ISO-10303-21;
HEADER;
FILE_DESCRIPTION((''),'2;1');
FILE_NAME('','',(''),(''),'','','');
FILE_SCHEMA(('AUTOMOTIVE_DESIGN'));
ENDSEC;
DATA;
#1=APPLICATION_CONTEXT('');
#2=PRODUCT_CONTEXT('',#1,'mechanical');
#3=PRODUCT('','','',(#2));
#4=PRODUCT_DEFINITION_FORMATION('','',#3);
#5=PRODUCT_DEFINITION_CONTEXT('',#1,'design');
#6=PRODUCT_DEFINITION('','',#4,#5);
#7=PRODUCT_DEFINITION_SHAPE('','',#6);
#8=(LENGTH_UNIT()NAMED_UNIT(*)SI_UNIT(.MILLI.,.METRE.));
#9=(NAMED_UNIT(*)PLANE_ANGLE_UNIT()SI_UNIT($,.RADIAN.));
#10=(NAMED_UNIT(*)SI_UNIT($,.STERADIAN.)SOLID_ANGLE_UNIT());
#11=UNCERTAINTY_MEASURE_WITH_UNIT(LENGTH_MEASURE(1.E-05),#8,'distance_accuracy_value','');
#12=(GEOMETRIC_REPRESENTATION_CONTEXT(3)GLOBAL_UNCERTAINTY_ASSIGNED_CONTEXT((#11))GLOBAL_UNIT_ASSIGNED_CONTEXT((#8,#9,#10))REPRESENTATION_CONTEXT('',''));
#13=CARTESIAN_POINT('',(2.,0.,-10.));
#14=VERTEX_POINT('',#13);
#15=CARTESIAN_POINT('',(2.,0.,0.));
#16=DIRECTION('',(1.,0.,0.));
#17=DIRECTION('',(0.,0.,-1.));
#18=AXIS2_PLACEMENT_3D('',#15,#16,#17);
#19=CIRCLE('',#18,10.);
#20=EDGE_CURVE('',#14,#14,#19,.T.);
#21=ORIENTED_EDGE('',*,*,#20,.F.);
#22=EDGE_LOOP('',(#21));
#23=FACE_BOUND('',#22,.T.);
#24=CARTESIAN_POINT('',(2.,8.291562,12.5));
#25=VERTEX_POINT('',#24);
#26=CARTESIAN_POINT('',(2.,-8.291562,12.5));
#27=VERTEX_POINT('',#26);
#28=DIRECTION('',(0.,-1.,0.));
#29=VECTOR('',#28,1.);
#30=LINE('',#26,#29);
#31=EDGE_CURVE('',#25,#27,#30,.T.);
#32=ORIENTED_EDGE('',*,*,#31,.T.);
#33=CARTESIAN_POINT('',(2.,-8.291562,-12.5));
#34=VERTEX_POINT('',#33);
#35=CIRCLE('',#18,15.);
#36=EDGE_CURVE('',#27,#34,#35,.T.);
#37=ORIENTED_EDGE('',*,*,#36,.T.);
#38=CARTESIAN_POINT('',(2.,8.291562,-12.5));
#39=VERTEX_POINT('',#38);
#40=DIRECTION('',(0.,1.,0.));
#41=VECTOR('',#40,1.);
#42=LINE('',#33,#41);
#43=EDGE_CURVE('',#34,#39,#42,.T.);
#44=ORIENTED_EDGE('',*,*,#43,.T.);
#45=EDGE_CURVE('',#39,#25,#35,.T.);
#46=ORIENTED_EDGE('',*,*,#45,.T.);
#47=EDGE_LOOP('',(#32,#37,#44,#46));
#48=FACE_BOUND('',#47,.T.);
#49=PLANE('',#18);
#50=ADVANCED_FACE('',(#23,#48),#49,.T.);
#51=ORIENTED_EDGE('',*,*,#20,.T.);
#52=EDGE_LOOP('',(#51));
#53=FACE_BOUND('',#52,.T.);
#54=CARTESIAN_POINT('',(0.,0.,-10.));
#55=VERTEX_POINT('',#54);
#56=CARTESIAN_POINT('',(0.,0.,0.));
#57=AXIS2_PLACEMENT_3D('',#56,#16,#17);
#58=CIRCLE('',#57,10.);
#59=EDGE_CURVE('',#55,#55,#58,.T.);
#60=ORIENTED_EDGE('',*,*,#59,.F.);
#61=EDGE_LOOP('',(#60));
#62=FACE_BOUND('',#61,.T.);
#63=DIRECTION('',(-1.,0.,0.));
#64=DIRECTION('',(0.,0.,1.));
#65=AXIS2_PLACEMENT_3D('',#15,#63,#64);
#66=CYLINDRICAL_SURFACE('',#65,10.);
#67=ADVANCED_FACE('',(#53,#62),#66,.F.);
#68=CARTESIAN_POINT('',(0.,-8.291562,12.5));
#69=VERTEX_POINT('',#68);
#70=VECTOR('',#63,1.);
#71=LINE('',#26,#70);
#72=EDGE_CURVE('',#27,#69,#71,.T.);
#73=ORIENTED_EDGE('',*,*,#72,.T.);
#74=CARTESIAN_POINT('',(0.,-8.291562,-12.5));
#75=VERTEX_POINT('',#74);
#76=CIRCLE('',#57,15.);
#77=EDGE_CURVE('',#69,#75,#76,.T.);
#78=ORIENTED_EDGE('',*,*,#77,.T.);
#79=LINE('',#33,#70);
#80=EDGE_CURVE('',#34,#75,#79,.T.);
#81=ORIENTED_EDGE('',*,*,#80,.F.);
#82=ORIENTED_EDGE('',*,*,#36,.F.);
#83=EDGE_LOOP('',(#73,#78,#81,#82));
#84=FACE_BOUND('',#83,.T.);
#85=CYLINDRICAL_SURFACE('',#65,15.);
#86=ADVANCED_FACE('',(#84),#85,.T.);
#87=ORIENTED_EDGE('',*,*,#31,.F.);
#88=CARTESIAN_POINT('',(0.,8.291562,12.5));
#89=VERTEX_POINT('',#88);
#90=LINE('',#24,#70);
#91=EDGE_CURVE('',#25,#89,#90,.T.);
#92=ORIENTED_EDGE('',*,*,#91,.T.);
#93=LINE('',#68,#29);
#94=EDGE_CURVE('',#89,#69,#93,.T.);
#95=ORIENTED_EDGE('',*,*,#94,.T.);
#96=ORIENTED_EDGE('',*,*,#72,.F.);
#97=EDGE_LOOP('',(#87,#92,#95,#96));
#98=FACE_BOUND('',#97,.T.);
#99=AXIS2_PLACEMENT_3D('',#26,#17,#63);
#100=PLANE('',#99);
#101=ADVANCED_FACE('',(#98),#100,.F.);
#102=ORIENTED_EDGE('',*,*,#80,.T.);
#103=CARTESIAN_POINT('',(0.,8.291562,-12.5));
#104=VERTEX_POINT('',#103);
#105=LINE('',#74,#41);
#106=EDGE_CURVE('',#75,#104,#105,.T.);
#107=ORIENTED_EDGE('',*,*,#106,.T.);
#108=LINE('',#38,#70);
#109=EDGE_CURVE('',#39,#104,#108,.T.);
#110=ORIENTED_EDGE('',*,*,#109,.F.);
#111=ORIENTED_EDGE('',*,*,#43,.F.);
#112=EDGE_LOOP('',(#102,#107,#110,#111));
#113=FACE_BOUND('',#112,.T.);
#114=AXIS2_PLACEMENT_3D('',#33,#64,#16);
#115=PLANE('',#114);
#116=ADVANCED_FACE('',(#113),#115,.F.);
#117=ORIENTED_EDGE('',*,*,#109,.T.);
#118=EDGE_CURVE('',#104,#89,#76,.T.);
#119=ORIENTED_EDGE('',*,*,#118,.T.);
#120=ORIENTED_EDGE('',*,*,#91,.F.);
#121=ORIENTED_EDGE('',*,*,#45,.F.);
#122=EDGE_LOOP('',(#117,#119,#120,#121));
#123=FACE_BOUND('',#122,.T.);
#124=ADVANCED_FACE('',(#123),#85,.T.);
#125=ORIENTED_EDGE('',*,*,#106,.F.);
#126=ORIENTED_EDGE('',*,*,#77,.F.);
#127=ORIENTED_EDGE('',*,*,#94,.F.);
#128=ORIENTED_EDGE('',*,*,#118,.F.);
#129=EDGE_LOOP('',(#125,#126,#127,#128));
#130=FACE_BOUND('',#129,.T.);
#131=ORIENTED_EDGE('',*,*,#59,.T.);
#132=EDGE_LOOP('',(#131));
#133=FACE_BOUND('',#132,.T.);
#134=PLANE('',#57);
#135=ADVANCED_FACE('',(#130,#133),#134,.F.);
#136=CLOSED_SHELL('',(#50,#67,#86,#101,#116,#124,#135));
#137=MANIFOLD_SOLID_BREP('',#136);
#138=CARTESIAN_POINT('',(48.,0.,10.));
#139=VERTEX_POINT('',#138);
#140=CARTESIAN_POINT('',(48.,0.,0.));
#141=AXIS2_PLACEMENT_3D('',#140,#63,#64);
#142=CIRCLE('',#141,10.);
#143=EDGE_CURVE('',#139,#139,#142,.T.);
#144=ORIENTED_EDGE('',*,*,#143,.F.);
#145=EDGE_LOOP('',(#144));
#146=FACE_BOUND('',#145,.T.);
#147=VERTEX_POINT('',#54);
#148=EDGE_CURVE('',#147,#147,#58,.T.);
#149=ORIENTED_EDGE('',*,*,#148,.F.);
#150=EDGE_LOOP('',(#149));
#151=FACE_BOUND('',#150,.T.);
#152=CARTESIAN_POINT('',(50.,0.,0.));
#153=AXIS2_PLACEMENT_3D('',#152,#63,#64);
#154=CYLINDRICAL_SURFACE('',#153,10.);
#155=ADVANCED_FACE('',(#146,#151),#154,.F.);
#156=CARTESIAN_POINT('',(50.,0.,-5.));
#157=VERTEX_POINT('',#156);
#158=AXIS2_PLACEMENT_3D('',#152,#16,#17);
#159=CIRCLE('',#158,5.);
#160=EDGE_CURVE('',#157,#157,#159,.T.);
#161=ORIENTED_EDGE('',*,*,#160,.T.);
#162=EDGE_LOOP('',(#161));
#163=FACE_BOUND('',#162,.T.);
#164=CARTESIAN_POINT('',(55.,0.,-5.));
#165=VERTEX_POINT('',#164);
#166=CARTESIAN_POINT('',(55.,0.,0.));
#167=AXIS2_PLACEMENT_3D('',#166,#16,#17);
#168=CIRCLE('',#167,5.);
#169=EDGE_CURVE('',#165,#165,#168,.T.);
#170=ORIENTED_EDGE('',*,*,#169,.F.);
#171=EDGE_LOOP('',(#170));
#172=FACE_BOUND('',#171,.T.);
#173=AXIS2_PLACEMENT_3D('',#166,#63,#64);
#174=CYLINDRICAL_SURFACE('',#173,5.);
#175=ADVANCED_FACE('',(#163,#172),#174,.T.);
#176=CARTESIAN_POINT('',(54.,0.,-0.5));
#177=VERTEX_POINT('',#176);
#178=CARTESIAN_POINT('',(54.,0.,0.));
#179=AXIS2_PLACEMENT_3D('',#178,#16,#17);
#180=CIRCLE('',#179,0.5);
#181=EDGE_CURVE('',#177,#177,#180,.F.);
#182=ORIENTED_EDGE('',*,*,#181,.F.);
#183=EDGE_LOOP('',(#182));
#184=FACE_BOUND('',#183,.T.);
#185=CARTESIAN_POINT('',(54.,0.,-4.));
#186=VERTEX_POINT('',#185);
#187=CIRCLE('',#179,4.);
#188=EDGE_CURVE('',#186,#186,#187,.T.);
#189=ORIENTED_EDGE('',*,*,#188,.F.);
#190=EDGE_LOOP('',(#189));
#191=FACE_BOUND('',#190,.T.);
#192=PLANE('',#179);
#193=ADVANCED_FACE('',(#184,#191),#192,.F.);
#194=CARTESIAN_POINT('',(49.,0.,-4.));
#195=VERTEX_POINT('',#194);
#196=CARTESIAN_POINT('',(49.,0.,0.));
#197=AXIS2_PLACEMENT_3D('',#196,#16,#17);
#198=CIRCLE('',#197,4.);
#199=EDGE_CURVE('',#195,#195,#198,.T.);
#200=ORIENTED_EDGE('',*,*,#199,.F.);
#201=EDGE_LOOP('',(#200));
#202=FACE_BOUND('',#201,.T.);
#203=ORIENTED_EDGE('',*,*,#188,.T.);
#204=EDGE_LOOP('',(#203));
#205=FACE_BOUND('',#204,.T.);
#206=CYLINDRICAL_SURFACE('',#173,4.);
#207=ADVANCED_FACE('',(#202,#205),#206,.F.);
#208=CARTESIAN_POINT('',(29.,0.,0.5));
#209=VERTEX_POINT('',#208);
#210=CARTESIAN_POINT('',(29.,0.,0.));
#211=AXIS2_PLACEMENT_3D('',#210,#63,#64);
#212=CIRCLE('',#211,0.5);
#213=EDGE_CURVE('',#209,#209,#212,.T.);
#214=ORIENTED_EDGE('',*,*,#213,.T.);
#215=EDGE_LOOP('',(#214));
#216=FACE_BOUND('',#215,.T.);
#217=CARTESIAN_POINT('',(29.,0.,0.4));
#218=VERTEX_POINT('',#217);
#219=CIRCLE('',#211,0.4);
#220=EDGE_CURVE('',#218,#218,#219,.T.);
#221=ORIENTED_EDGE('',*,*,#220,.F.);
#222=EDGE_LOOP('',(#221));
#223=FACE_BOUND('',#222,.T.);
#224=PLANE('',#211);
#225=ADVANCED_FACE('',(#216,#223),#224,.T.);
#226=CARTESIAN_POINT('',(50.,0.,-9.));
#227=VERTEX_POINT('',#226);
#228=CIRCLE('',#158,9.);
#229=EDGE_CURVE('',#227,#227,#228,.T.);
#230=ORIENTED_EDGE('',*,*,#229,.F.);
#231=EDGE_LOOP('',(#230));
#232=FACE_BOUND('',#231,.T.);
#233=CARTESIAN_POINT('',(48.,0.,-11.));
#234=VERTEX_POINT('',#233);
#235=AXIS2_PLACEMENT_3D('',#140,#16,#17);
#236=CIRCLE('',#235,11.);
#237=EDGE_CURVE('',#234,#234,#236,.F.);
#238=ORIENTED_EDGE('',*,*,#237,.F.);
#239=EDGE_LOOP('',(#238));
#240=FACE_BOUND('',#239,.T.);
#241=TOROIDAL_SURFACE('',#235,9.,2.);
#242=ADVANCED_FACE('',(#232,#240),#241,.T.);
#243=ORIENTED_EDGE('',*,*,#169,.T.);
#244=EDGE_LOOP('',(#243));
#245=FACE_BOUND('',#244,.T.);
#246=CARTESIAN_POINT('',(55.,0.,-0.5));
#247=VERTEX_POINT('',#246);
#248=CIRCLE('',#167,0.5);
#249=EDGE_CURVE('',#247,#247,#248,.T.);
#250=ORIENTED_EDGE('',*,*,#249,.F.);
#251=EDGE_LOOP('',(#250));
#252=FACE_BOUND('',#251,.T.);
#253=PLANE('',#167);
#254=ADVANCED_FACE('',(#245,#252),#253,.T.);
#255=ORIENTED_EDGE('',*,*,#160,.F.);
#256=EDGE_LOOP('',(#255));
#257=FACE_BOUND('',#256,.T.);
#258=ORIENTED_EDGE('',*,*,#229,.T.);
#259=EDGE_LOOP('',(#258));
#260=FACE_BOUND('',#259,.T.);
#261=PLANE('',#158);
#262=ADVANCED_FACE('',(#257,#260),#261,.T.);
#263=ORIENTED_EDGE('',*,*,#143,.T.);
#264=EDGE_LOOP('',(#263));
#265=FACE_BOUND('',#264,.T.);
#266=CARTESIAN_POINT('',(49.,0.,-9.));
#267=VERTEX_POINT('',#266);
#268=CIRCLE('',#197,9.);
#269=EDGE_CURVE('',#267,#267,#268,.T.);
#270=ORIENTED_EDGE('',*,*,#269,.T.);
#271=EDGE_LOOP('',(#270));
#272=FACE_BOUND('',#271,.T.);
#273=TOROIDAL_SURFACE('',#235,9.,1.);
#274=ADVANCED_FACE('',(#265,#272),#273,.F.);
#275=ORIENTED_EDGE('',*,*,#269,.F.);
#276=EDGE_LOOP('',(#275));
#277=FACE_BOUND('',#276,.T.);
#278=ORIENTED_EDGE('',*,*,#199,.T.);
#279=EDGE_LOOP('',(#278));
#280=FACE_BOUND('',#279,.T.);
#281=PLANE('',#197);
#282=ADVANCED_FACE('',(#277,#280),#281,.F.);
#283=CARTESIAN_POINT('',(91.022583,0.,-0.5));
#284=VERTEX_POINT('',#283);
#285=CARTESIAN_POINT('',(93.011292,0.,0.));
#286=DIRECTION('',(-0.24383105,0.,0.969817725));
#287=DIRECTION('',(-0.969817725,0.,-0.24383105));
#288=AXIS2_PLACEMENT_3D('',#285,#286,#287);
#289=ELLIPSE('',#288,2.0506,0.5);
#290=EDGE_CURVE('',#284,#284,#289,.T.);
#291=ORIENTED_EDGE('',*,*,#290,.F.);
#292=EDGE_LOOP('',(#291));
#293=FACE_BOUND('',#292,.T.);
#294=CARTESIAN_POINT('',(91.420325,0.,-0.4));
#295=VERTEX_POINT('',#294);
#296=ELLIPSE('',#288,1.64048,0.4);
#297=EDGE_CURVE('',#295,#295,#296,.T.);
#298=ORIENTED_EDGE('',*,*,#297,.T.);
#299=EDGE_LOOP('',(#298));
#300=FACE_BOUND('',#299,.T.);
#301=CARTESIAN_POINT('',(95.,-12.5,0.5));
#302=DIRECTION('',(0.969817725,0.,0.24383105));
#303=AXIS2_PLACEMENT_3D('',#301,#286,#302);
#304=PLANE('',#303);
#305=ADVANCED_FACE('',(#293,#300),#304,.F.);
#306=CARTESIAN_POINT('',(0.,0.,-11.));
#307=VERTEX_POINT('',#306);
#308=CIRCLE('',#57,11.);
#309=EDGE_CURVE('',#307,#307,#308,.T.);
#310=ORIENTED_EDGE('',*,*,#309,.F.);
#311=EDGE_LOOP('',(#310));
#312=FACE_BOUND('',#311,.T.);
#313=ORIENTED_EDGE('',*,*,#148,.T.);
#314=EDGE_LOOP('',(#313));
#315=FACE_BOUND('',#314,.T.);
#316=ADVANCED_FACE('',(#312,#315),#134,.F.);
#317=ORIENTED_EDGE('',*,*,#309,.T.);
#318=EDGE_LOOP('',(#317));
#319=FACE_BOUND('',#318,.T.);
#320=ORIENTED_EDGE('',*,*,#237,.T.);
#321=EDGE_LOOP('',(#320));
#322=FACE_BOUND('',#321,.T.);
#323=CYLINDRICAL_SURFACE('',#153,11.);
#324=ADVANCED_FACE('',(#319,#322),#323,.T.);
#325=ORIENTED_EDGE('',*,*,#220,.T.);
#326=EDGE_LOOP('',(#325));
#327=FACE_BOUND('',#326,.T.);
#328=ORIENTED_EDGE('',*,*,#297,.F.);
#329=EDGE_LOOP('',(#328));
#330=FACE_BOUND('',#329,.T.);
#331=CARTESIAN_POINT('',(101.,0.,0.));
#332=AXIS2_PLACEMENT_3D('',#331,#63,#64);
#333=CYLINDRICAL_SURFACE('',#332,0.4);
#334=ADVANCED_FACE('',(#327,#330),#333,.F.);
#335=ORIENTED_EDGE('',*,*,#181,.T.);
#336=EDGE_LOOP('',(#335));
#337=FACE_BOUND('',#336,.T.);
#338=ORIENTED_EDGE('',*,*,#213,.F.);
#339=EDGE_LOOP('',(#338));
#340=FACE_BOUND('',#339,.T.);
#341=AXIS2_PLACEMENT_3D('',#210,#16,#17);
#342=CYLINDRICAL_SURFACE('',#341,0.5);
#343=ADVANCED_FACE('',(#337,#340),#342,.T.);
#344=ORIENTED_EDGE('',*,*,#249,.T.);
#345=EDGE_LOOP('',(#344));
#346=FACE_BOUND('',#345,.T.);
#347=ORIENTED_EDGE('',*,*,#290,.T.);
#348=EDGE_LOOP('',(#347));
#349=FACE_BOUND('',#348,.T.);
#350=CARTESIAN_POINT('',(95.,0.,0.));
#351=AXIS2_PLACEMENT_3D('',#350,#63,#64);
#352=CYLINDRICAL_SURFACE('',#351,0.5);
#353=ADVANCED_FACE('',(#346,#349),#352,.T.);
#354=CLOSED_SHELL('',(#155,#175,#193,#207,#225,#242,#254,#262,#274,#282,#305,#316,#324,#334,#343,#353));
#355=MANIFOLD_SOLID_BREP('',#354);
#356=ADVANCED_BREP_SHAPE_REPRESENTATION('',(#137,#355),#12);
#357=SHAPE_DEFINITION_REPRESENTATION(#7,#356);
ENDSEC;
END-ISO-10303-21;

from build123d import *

# Parameters (mm, degrees)
CROQUIS2_R              = 11
SALIENTE_EXTRUIR1_DEPTH = 50
REDONDEO1_R             = 2
CROQUIS4_R              = 5
SALIENTE_EXTRUIR2_DEPTH = 5
CROQUIS5_R              = 0.5
SALIENTE_EXTRUIR3_DEPTH = 40
SALIENTE_EXTRUIR4_START = 25
CROQUIS6_R              = 0.5
SALIENTE_EXTRUIR4_DEPTH = 25
CORTAR_EXTRUIR2_DEPTH   = 12.5
CROQUIS8_R              = 0.4
CORTAR_EXTRUIR3_DEPTH   = 72
CROQUIS9_R              = 10
SALIENTE_EXTRUIR5_DEPTH = 2


# Read off the part's stored shape, not the designer's step: Vaciado1
with BuildPart() as part:
    # Croquis2 → Saliente-Extruir1 (new body)
    with BuildSketch(Plane(origin=(0, 0, 0), x_dir=(0, 0, -1), z_dir=(1, 0, 0))):
        Circle(CROQUIS2_R)
    extrude(amount=SALIENTE_EXTRUIR1_DEPTH)

    # Redondeo1
    redondeo1_edges = [part.edges().sort_by_distance(p)[0] for p in [
        (50, 0, 11),
    ]]
    fillet(redondeo1_edges, radius=REDONDEO1_R)

    # Croquis4 → Saliente-Extruir2 (add)
    with BuildSketch(Plane(origin=(50, 0, 0), x_dir=(0, 0, -1), z_dir=(1, 0, 0))):
        Circle(CROQUIS4_R)
    extrude(amount=SALIENTE_EXTRUIR2_DEPTH)

    # Croquis5 → Saliente-Extruir3 (add)
    with BuildSketch(Plane(origin=(55, 0, 0), x_dir=(0, 0, -1), z_dir=(1, 0, 0))):
        Circle(CROQUIS5_R)
    extrude(amount=SALIENTE_EXTRUIR3_DEPTH)

    # Vaciado1 outline → Vaciado1 (revolve, cut)
    with BuildSketch(Plane.YX):
        with BuildLine():
            Line((10, 0), (10, 48))
            ThreePointArc((10, 48), (9.707106781, 48.707106781), (9, 49))
            Line((9, 49), (4, 49))
            Line((4, 49), (4, 54))
            Line((4, 54), (0, 54))
            Line((0, 54), (0, 0))
            Line((0, 0), (10, 0))
        make_face()
    revolve(axis=Axis((0, 0, 0), (1, 0, 0)), mode=Mode.SUBTRACT)

    # Croquis6 → Saliente-Extruir4 (add)
    with BuildSketch(Plane.ZY.offset(-54).offset(SALIENTE_EXTRUIR4_START)):
        with Locations(Location((0, 0, 0), (0, 0, 180))):
            Circle(CROQUIS6_R)
    extrude(amount=-SALIENTE_EXTRUIR4_DEPTH)

    # Croquis7 → Cortar-Extruir2 (cut, symmetric)
    with BuildSketch(Plane(origin=(0, 0, 0), x_dir=(1, 0, 0), z_dir=(0, 1, 0))):
        Polygon((95, -0.5), (91.022583164, 0.5), (95, 0.5), align=None)
    extrude(amount=CORTAR_EXTRUIR2_DEPTH, both=True, mode=Mode.SUBTRACT)

    # Croquis8 → Cortar-Extruir3 (cut)
    with BuildSketch(Plane.ZY.offset(-29)):
        Circle(CROQUIS8_R)
    extrude(amount=-CORTAR_EXTRUIR3_DEPTH, mode=Mode.SUBTRACT)


with BuildPart() as body_2:
    # Croquis9 → Saliente-Extruir5 (new body)
    with BuildSketch(Plane(origin=(0, 0, 0), x_dir=(0, 0, -1), z_dir=(1, 0, 0))):
        with BuildLine():
            Line((12.5, -8.291561976), (12.5, 8.291561976))
            ThreePointArc((12.5, 8.291561976), (0, 15), (-12.5, 8.291561976))
            Line((-12.5, 8.291561976), (-12.5, -8.291561976))
            ThreePointArc((-12.5, -8.291561976), (0, -15), (12.5, -8.291561976))
        make_face()
        Circle(CROQUIS9_R, mode=Mode.SUBTRACT)
    extrude(amount=SALIENTE_EXTRUIR5_DEPTH)


solid = Compound([part.part, body_2.part])
